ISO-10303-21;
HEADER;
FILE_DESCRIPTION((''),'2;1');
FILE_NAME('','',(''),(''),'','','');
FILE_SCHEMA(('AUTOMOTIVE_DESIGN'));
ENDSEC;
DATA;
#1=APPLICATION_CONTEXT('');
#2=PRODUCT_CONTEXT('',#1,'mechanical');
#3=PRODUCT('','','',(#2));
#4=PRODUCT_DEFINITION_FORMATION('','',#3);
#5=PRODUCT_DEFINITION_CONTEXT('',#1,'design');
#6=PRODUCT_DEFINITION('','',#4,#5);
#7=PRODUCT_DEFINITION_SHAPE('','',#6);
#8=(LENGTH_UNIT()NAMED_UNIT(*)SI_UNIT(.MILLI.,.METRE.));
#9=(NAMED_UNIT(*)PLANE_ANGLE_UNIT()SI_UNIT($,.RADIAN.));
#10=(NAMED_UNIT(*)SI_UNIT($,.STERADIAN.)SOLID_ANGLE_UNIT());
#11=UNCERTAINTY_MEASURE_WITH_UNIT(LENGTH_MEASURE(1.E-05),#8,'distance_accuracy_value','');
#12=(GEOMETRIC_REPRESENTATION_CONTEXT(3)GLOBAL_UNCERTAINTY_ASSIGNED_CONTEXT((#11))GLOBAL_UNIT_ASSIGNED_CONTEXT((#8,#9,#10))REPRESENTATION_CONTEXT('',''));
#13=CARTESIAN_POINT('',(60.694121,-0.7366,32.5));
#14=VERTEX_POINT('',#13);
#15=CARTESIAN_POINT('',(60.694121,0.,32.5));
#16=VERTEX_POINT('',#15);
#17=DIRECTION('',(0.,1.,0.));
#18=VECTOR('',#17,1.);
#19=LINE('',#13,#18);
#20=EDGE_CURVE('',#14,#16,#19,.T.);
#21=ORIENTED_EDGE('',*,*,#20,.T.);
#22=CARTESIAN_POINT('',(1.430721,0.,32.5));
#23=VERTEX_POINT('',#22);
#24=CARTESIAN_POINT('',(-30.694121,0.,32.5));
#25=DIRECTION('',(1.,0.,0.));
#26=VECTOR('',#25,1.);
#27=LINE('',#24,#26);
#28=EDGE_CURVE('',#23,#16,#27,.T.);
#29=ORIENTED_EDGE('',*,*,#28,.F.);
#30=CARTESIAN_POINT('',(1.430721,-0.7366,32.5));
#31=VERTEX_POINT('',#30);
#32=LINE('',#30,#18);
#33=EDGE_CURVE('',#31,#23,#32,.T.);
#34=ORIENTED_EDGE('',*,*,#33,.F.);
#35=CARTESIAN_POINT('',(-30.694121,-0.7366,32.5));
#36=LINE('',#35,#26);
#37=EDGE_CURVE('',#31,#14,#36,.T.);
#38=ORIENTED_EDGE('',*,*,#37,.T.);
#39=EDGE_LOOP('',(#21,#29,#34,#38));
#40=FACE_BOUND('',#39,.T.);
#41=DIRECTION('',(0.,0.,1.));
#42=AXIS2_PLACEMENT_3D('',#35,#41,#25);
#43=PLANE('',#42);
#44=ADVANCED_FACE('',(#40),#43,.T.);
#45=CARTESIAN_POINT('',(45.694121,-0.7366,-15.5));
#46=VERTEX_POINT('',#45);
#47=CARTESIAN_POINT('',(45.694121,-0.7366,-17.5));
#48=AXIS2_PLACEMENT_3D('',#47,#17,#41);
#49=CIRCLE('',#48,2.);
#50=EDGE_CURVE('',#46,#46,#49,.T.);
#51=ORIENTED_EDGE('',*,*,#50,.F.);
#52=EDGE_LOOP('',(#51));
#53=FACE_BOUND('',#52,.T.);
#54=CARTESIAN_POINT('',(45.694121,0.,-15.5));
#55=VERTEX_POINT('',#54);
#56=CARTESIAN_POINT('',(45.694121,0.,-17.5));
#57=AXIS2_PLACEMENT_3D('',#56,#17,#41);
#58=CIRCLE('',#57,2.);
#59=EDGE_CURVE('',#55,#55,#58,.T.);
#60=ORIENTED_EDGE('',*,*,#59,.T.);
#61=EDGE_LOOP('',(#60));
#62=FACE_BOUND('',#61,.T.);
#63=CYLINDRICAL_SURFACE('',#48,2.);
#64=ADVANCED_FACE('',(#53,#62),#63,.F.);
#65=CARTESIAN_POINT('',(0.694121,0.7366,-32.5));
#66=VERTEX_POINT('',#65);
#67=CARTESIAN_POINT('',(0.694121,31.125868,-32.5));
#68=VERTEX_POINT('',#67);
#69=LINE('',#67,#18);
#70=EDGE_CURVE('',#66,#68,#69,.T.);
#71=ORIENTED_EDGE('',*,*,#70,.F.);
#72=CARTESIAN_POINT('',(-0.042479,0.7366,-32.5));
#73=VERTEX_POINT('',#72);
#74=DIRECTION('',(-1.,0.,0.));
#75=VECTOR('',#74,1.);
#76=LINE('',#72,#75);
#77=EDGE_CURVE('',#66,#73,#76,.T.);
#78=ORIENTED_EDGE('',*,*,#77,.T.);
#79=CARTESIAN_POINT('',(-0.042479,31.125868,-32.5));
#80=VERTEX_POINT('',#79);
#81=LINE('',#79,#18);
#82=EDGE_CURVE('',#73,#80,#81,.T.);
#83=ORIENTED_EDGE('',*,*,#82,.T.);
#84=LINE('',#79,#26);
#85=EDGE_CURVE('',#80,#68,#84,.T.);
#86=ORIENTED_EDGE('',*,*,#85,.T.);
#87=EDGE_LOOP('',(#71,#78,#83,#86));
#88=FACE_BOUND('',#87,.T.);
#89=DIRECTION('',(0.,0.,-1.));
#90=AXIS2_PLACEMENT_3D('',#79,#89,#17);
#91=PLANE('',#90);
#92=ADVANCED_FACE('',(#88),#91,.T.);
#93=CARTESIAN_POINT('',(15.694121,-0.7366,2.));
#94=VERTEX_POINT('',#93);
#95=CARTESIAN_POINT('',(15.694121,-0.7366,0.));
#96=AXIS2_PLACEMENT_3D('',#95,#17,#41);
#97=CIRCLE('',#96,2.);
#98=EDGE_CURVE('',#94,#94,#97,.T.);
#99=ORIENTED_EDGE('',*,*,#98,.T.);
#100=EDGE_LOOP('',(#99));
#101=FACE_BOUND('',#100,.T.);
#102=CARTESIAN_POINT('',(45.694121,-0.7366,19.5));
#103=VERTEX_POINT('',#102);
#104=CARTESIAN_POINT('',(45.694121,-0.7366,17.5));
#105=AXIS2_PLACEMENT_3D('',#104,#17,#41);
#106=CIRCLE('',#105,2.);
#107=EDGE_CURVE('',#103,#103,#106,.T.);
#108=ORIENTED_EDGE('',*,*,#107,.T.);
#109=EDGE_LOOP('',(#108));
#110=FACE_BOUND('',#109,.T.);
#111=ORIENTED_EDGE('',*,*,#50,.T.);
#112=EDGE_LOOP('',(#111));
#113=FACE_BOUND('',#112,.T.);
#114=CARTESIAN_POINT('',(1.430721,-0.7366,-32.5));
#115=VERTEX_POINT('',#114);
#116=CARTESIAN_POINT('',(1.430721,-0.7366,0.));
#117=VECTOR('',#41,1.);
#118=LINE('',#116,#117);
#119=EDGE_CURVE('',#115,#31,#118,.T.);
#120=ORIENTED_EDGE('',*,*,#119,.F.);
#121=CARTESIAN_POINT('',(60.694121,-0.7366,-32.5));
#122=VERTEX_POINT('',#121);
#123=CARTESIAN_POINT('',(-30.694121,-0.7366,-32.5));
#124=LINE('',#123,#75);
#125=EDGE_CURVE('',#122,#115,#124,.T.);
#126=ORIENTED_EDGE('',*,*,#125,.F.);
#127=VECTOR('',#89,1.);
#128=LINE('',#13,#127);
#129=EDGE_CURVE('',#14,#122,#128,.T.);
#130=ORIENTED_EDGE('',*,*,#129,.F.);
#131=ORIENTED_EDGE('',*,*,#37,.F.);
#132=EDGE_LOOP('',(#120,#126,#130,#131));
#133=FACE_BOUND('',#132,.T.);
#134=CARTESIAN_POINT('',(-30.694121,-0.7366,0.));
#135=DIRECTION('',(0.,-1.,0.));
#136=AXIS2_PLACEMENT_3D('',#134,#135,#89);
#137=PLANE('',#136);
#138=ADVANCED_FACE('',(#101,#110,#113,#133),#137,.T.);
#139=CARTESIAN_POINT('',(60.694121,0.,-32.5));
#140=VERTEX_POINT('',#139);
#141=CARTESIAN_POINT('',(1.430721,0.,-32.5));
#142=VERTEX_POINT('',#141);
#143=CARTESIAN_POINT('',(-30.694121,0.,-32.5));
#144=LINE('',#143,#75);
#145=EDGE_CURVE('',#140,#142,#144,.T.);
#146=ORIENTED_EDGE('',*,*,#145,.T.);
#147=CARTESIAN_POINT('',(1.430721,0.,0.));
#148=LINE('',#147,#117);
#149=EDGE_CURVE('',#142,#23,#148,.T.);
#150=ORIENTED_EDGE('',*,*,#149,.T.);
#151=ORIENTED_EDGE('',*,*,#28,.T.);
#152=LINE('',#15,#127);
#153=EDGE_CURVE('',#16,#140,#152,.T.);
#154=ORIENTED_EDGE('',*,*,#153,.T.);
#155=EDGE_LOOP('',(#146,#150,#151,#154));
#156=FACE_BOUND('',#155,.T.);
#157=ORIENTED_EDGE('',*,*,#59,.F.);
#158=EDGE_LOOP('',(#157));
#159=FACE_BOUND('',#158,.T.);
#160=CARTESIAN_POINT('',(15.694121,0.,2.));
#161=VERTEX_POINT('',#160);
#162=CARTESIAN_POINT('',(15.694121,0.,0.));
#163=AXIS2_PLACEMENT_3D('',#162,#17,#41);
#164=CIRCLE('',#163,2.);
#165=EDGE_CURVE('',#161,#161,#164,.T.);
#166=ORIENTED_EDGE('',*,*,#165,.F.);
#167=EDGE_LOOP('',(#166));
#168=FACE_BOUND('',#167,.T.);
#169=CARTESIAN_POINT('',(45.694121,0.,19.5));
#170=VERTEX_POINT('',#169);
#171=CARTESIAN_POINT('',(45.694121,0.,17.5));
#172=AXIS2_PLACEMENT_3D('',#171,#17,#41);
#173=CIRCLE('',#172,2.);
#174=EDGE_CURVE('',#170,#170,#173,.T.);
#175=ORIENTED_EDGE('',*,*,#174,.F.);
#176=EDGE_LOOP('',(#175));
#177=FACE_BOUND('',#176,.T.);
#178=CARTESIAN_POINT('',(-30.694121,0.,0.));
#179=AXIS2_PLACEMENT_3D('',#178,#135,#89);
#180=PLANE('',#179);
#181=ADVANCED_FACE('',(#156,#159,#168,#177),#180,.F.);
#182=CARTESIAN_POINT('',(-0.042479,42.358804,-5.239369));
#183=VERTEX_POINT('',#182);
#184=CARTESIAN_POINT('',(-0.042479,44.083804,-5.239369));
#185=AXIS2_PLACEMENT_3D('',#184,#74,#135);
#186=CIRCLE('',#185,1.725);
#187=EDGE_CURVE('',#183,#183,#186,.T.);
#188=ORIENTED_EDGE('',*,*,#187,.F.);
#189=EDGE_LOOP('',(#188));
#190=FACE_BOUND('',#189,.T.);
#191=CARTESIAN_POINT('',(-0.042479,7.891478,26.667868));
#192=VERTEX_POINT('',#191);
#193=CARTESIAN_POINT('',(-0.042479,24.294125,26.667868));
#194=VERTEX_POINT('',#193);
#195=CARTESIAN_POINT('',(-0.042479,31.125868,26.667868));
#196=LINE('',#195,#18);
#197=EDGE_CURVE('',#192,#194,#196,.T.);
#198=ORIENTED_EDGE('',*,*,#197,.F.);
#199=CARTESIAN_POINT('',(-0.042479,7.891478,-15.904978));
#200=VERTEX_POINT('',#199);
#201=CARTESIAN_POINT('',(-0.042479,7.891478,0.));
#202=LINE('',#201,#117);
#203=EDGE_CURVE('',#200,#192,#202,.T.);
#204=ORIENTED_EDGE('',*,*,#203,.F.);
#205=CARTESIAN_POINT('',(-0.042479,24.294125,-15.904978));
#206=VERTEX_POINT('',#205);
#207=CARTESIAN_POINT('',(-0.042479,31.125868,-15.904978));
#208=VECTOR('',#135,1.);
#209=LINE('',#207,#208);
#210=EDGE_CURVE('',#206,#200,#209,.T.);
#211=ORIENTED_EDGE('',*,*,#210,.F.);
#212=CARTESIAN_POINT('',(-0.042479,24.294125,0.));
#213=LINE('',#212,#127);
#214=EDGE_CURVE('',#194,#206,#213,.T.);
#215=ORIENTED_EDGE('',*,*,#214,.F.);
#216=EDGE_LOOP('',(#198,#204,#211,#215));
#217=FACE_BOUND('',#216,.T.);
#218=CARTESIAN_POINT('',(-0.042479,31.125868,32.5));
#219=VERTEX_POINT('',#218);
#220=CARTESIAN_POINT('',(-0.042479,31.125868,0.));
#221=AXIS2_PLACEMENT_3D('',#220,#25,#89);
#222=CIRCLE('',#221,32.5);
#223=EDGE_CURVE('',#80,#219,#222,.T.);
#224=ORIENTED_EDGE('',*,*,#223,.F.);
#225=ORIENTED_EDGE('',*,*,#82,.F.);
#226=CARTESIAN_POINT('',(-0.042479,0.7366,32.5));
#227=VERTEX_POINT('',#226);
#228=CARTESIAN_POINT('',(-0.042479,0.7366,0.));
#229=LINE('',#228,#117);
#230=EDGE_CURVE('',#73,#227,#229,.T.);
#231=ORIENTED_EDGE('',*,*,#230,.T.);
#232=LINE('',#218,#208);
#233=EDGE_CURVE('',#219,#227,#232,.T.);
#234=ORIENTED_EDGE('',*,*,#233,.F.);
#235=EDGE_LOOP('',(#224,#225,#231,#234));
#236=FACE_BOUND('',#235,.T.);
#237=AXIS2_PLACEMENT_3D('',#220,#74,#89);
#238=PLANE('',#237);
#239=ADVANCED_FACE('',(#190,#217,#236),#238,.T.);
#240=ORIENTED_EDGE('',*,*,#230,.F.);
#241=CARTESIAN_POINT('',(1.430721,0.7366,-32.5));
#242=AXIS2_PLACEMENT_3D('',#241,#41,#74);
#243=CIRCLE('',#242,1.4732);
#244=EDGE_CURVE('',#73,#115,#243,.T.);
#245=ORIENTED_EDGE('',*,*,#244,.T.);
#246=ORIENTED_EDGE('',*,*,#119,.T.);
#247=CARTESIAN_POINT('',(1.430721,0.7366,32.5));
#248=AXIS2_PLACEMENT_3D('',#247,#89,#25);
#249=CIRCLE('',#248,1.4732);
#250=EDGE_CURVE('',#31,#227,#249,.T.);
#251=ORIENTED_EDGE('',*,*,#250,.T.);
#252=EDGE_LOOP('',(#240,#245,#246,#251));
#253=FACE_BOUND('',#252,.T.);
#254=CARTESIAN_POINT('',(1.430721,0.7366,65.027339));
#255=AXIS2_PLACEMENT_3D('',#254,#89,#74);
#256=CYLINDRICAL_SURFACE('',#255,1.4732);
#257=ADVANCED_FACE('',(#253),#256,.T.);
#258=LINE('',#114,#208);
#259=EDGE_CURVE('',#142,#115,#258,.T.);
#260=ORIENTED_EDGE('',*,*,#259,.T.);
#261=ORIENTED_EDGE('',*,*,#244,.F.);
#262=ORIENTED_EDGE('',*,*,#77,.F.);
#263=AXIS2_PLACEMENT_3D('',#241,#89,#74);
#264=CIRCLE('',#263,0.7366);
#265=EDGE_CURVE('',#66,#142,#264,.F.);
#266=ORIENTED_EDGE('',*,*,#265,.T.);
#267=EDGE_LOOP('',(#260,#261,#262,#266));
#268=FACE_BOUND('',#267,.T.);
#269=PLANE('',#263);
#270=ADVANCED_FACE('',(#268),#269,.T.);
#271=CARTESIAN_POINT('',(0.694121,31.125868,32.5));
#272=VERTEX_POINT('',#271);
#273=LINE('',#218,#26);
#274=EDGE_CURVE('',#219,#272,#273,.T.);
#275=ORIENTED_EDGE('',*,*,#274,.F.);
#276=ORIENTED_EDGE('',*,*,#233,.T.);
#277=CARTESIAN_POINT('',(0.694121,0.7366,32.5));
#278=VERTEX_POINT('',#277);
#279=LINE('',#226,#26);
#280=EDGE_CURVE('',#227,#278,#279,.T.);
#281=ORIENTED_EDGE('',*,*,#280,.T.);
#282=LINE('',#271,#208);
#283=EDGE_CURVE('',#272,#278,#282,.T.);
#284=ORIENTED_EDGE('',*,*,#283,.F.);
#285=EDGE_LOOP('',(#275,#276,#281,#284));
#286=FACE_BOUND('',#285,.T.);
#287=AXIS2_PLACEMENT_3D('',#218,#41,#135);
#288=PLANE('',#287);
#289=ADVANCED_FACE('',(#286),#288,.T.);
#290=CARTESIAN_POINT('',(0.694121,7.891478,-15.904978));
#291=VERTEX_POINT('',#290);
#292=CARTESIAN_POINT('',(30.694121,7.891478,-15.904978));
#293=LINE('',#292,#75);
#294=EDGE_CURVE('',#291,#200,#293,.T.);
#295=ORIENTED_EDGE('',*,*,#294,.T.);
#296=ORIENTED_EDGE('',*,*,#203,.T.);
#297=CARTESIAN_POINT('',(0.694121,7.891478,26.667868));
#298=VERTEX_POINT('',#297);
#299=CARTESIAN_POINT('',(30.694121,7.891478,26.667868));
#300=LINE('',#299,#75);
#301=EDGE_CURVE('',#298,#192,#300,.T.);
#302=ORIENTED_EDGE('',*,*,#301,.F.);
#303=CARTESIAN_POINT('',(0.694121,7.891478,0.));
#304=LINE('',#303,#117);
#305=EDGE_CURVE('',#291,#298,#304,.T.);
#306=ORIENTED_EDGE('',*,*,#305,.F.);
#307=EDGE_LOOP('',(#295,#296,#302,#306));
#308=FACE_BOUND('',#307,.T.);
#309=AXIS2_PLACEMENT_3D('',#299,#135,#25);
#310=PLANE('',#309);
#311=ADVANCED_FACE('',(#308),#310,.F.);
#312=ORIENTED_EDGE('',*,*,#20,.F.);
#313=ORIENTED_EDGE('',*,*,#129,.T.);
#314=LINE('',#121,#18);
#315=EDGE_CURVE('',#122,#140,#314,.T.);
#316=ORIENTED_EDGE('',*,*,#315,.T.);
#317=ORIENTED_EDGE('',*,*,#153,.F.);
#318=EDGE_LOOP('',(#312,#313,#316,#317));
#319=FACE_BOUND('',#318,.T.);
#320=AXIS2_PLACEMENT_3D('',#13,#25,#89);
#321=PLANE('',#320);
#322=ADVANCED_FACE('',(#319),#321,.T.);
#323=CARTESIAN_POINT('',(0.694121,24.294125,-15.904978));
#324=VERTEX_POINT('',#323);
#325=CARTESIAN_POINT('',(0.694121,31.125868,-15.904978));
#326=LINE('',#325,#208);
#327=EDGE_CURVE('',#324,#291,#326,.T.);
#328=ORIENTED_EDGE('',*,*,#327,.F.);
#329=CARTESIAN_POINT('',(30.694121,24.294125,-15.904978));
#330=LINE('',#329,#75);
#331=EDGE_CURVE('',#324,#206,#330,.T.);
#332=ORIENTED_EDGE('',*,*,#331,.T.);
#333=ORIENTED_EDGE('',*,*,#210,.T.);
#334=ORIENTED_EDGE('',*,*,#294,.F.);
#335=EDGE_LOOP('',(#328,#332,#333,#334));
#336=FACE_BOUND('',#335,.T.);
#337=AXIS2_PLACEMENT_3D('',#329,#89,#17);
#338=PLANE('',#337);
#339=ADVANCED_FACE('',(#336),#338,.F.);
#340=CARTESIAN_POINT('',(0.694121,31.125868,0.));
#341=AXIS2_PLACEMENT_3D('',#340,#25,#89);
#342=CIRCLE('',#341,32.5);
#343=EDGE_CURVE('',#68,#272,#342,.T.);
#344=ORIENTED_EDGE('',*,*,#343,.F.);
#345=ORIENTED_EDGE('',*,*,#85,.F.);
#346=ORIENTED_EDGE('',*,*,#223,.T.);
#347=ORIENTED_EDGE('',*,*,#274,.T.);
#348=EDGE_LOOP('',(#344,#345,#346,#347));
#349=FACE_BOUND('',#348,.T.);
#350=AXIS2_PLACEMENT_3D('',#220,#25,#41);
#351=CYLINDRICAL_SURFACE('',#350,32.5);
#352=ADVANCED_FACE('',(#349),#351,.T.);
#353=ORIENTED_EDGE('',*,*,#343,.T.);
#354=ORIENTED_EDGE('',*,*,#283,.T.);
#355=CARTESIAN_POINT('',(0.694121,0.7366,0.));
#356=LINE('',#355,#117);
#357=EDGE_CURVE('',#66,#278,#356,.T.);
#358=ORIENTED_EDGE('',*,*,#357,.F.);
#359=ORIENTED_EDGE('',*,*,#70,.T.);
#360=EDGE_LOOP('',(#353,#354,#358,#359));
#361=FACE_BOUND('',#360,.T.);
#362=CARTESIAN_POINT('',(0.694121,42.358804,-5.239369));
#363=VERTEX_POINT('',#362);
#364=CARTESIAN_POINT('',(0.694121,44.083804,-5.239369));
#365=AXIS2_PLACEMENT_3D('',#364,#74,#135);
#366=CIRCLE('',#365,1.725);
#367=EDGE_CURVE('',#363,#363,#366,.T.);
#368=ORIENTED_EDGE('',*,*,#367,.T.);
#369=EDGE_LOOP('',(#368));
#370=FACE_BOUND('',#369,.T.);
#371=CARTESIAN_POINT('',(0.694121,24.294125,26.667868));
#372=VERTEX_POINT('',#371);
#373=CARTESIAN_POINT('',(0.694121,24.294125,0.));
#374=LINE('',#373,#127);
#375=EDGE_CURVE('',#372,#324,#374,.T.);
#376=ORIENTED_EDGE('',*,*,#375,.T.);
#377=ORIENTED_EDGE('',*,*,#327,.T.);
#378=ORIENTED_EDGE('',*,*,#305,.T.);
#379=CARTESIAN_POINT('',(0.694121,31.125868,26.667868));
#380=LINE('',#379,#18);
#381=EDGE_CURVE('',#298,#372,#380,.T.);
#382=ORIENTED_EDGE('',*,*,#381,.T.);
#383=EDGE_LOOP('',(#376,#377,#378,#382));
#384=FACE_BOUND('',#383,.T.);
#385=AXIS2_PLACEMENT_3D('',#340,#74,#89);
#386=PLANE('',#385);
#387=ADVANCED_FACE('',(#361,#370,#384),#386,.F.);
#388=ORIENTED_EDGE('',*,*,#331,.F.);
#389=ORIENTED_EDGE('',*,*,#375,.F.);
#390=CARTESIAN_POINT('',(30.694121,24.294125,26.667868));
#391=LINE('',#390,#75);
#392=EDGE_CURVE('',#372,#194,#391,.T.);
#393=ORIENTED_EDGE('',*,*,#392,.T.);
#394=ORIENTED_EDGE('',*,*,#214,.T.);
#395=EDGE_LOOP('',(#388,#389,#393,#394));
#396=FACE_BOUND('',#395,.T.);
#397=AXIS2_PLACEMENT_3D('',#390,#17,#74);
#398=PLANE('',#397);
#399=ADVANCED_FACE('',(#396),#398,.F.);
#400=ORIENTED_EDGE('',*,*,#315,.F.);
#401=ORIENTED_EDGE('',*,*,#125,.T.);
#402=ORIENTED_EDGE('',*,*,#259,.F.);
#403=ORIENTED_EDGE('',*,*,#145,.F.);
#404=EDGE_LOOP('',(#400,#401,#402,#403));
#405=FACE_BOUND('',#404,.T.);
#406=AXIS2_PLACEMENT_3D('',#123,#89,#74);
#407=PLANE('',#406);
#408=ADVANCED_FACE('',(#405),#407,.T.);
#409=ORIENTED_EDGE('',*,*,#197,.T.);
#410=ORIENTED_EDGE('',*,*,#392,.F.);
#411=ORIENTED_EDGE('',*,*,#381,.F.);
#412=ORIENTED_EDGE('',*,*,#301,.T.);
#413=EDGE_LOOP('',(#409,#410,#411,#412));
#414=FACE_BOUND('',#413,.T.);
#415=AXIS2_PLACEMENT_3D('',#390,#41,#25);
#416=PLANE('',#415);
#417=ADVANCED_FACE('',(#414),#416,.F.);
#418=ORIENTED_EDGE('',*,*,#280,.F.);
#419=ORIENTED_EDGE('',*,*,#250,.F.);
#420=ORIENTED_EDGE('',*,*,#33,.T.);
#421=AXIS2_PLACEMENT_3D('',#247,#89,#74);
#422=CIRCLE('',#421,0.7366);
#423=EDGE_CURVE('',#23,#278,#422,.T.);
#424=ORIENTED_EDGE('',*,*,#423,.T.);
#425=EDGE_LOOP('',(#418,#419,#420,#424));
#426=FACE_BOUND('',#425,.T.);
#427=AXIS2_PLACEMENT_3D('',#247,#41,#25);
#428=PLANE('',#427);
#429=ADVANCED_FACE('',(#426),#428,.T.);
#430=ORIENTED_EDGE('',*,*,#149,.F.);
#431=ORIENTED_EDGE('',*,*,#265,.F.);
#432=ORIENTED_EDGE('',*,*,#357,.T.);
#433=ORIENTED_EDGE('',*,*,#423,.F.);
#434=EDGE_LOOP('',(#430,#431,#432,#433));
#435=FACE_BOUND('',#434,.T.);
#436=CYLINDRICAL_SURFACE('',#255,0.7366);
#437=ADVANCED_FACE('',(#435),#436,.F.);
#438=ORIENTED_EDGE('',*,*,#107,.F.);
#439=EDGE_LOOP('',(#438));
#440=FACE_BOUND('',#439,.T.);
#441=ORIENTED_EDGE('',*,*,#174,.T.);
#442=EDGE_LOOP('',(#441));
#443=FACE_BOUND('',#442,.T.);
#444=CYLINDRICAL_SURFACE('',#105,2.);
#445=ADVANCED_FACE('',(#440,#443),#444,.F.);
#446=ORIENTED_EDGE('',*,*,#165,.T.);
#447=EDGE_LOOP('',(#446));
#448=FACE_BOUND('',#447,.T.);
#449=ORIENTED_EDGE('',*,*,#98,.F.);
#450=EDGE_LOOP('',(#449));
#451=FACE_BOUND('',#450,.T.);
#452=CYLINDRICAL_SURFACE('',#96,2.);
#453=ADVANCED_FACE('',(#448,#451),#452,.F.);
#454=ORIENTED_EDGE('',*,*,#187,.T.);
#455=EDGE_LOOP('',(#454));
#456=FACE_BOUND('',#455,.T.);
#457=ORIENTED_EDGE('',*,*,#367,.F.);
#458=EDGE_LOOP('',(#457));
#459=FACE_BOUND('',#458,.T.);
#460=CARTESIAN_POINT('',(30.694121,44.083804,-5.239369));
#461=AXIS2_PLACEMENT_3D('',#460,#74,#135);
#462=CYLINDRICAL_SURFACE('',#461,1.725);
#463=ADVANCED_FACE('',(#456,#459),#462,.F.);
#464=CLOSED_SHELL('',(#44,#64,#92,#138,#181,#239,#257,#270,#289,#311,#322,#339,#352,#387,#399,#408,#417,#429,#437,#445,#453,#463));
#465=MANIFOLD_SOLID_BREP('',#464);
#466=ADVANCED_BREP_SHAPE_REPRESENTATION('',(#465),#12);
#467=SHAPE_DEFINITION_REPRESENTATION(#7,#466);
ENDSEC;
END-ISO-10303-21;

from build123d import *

# Parameters (mm, degrees)
SKETCH1_R                = 2
BASE_FLANGE3_DEPTH       = 0.7366
SKETCHED_START           = -64
SKETCHED_BEND1_OUTLINE_W = 0.7366
SKETCHED_BEND1_OUTLINE_H = 65
SKETCHED_BEND1_DEPTH     = 64.108877104
SKETCHED_START_2         = 0.168203781
SKETCHED_BEND1_2_DEPTH   = 0.525916755
SKETCHED_START_3         = -0.042479464
SKETCHED_BEND1_3_DEPTH   = 1.4732
SKETCHED_START_4         = -32.5
SKETCHED_BEND1_4_DEPTH   = 65
SKETCH28_W               = 42.572846016
SKETCH28_H               = 16.402646855
CUT_EXTRUDE8_DEPTH       = 83.088587536
CUT_EXTRUDE9_DEPTH       = 83.088587536
CUT_EXTRUDE9_DEPTH_BACK  = 83.088587536
SKETCH29_R               = 1.725
SKETCH30_W               = 30
SKETCH30_H               = 65
SKETCH30_R               = 2
TAB1_DEPTH               = 0.7366


with BuildPart() as part:
    # Base-Flange3: sheet metal written as solids
    # Sketch1 → Base-Flange3 (new body)
    with BuildSketch(Plane(origin=(0, 0, 0), x_dir=(1, 0, 0), z_dir=(0, 1, 0))):
        with BuildLine():
            Line((-30.694120536, 32.5), (30.694120536, 32.5))
            Line((30.694120536, 32.5), (30.694120536, -32.5))
            Line((30.694120536, -32.5), (-30.694120536, -32.5))
            ThreePointArc((-30.694120536, -32.5), (-63.194120536, 0), (-30.694120536, 32.5))
        make_face()
        with Locations(Location((15.694120536, 0, 0), (0, 0, 270))):
            Circle(SKETCH1_R, mode=Mode.SUBTRACT)
    extrude(amount=-BASE_FLANGE3_DEPTH)

    # Sketched Bend1: read off the stored shape, not the designer's step
    # Sketched Bend1 outline → Sketched Bend1 (cut)
    with BuildSketch(Plane.YZ.offset(SKETCHED_START)):
        with Locations((-0.3683, 0)):
            Rectangle(SKETCHED_BEND1_OUTLINE_W, SKETCHED_BEND1_OUTLINE_H)
    extrude(amount=SKETCHED_BEND1_DEPTH, mode=Mode.SUBTRACT)

    # Sketched Bend1 2 outline → Sketched Bend1 2 (add)
    with BuildSketch(Plane.YZ.offset(SKETCHED_START_2)):
        with BuildLine():
            ThreePointArc((31.12586821, -32.5), (63.62586821, 0), (31.12586821, 32.5))
            Line((31.12586821, 32.5), (0, 32.5))
            Line((0, 32.5), (0, -32.5))
            Line((0, -32.5), (31.12586821, -32.5))
        make_face()
    extrude(amount=SKETCHED_BEND1_2_DEPTH)

    # Sketched Bend1 3 outline → Sketched Bend1 3 (add)
    with BuildSketch(Plane.YZ.offset(SKETCHED_START_3)):
        with BuildLine():
            ThreePointArc((31.12586821, -32.5), (63.62586821, 0), (31.12586821, 32.5))
            Line((31.12586821, 32.5), (0, 32.5))
            Line((0, 32.5), (0, -32.5))
            Line((0, -32.5), (31.12586821, -32.5))
        make_face()
    extrude(amount=SKETCHED_BEND1_3_DEPTH)

    # Sketched Bend1 4 outline → Sketched Bend1 4 (cut)
    with BuildSketch(Plane.XY.offset(SKETCHED_START_4)):
        with BuildLine():
            Line((0.694120536, 65), (0.694120536, 0.7366))
            ThreePointArc((0.694120536, 0.7366), (0.90986568, 0.215745144), (1.430720536, 0))
            Line((1.430720536, 0), (1.430720536, 65))
            Line((1.430720536, 65), (0.694120536, 65))
        make_face()
        with BuildLine():
            Line((-0.042479464, 0.7366), (-0.042479396, 65))
            Line((-0.042479396, 65), (-2, 65))
            Line((-2, 65), (-2, 0))
            Line((-2, 0), (0.108877104, 0))
            Line((0.108877104, 0), (0.108877104, -2))
            Line((0.108877104, -2), (32, -2))
            Line((32, -2), (32, -0.736599968))
            Line((32, -0.736599968), (1.430720536, -0.7366))
            ThreePointArc((1.430720536, -0.7366), (0.389010825, -0.30510971), (-0.042479464, 0.7366))
        make_face()
    extrude(amount=SKETCHED_BEND1_4_DEPTH, mode=Mode.SUBTRACT)

    # Sketch28 → Cut-Extrude8 (cut, through all)
    with BuildSketch(Plane.ZY.offset(9.729079464)):
        with Locations((5.381444798, 16.092801871)):
            Rectangle(SKETCH28_W, SKETCH28_H)
    extrude(amount=-CUT_EXTRUDE8_DEPTH, mode=Mode.SUBTRACT)

    # Sketch29 → Cut-Extrude9 (cut, two sides: drawn at the far end of the back side and taken through both)
    with BuildSketch(Plane.ZY.offset(9.729079464).offset(-CUT_EXTRUDE9_DEPTH_BACK)):
        with Locations(Location((-5.239369246, 44.083803898, 0), (0, 0, 270))):
            Circle(SKETCH29_R)
    extrude(amount=CUT_EXTRUDE9_DEPTH + CUT_EXTRUDE9_DEPTH_BACK, mode=Mode.SUBTRACT)

    # Tab1: sheet metal written as solids
    # Sketch30 → Tab1 (add)
    with BuildSketch(Plane(origin=(0, 0, 0), x_dir=(1, 0, 0), z_dir=(0, 1, 0))):
        with Locations((45.694120536, 0)):
            Rectangle(SKETCH30_W, SKETCH30_H)
        with Locations(Location((45.694120536, -17.5, 0), (0, 0, 270))):
            Circle(SKETCH30_R, mode=Mode.SUBTRACT)
        with Locations(Location((45.694120536, 17.5, 0), (0, 0, 270))):
            Circle(SKETCH30_R, mode=Mode.SUBTRACT)
    extrude(amount=-TAB1_DEPTH)


solid = part.part
